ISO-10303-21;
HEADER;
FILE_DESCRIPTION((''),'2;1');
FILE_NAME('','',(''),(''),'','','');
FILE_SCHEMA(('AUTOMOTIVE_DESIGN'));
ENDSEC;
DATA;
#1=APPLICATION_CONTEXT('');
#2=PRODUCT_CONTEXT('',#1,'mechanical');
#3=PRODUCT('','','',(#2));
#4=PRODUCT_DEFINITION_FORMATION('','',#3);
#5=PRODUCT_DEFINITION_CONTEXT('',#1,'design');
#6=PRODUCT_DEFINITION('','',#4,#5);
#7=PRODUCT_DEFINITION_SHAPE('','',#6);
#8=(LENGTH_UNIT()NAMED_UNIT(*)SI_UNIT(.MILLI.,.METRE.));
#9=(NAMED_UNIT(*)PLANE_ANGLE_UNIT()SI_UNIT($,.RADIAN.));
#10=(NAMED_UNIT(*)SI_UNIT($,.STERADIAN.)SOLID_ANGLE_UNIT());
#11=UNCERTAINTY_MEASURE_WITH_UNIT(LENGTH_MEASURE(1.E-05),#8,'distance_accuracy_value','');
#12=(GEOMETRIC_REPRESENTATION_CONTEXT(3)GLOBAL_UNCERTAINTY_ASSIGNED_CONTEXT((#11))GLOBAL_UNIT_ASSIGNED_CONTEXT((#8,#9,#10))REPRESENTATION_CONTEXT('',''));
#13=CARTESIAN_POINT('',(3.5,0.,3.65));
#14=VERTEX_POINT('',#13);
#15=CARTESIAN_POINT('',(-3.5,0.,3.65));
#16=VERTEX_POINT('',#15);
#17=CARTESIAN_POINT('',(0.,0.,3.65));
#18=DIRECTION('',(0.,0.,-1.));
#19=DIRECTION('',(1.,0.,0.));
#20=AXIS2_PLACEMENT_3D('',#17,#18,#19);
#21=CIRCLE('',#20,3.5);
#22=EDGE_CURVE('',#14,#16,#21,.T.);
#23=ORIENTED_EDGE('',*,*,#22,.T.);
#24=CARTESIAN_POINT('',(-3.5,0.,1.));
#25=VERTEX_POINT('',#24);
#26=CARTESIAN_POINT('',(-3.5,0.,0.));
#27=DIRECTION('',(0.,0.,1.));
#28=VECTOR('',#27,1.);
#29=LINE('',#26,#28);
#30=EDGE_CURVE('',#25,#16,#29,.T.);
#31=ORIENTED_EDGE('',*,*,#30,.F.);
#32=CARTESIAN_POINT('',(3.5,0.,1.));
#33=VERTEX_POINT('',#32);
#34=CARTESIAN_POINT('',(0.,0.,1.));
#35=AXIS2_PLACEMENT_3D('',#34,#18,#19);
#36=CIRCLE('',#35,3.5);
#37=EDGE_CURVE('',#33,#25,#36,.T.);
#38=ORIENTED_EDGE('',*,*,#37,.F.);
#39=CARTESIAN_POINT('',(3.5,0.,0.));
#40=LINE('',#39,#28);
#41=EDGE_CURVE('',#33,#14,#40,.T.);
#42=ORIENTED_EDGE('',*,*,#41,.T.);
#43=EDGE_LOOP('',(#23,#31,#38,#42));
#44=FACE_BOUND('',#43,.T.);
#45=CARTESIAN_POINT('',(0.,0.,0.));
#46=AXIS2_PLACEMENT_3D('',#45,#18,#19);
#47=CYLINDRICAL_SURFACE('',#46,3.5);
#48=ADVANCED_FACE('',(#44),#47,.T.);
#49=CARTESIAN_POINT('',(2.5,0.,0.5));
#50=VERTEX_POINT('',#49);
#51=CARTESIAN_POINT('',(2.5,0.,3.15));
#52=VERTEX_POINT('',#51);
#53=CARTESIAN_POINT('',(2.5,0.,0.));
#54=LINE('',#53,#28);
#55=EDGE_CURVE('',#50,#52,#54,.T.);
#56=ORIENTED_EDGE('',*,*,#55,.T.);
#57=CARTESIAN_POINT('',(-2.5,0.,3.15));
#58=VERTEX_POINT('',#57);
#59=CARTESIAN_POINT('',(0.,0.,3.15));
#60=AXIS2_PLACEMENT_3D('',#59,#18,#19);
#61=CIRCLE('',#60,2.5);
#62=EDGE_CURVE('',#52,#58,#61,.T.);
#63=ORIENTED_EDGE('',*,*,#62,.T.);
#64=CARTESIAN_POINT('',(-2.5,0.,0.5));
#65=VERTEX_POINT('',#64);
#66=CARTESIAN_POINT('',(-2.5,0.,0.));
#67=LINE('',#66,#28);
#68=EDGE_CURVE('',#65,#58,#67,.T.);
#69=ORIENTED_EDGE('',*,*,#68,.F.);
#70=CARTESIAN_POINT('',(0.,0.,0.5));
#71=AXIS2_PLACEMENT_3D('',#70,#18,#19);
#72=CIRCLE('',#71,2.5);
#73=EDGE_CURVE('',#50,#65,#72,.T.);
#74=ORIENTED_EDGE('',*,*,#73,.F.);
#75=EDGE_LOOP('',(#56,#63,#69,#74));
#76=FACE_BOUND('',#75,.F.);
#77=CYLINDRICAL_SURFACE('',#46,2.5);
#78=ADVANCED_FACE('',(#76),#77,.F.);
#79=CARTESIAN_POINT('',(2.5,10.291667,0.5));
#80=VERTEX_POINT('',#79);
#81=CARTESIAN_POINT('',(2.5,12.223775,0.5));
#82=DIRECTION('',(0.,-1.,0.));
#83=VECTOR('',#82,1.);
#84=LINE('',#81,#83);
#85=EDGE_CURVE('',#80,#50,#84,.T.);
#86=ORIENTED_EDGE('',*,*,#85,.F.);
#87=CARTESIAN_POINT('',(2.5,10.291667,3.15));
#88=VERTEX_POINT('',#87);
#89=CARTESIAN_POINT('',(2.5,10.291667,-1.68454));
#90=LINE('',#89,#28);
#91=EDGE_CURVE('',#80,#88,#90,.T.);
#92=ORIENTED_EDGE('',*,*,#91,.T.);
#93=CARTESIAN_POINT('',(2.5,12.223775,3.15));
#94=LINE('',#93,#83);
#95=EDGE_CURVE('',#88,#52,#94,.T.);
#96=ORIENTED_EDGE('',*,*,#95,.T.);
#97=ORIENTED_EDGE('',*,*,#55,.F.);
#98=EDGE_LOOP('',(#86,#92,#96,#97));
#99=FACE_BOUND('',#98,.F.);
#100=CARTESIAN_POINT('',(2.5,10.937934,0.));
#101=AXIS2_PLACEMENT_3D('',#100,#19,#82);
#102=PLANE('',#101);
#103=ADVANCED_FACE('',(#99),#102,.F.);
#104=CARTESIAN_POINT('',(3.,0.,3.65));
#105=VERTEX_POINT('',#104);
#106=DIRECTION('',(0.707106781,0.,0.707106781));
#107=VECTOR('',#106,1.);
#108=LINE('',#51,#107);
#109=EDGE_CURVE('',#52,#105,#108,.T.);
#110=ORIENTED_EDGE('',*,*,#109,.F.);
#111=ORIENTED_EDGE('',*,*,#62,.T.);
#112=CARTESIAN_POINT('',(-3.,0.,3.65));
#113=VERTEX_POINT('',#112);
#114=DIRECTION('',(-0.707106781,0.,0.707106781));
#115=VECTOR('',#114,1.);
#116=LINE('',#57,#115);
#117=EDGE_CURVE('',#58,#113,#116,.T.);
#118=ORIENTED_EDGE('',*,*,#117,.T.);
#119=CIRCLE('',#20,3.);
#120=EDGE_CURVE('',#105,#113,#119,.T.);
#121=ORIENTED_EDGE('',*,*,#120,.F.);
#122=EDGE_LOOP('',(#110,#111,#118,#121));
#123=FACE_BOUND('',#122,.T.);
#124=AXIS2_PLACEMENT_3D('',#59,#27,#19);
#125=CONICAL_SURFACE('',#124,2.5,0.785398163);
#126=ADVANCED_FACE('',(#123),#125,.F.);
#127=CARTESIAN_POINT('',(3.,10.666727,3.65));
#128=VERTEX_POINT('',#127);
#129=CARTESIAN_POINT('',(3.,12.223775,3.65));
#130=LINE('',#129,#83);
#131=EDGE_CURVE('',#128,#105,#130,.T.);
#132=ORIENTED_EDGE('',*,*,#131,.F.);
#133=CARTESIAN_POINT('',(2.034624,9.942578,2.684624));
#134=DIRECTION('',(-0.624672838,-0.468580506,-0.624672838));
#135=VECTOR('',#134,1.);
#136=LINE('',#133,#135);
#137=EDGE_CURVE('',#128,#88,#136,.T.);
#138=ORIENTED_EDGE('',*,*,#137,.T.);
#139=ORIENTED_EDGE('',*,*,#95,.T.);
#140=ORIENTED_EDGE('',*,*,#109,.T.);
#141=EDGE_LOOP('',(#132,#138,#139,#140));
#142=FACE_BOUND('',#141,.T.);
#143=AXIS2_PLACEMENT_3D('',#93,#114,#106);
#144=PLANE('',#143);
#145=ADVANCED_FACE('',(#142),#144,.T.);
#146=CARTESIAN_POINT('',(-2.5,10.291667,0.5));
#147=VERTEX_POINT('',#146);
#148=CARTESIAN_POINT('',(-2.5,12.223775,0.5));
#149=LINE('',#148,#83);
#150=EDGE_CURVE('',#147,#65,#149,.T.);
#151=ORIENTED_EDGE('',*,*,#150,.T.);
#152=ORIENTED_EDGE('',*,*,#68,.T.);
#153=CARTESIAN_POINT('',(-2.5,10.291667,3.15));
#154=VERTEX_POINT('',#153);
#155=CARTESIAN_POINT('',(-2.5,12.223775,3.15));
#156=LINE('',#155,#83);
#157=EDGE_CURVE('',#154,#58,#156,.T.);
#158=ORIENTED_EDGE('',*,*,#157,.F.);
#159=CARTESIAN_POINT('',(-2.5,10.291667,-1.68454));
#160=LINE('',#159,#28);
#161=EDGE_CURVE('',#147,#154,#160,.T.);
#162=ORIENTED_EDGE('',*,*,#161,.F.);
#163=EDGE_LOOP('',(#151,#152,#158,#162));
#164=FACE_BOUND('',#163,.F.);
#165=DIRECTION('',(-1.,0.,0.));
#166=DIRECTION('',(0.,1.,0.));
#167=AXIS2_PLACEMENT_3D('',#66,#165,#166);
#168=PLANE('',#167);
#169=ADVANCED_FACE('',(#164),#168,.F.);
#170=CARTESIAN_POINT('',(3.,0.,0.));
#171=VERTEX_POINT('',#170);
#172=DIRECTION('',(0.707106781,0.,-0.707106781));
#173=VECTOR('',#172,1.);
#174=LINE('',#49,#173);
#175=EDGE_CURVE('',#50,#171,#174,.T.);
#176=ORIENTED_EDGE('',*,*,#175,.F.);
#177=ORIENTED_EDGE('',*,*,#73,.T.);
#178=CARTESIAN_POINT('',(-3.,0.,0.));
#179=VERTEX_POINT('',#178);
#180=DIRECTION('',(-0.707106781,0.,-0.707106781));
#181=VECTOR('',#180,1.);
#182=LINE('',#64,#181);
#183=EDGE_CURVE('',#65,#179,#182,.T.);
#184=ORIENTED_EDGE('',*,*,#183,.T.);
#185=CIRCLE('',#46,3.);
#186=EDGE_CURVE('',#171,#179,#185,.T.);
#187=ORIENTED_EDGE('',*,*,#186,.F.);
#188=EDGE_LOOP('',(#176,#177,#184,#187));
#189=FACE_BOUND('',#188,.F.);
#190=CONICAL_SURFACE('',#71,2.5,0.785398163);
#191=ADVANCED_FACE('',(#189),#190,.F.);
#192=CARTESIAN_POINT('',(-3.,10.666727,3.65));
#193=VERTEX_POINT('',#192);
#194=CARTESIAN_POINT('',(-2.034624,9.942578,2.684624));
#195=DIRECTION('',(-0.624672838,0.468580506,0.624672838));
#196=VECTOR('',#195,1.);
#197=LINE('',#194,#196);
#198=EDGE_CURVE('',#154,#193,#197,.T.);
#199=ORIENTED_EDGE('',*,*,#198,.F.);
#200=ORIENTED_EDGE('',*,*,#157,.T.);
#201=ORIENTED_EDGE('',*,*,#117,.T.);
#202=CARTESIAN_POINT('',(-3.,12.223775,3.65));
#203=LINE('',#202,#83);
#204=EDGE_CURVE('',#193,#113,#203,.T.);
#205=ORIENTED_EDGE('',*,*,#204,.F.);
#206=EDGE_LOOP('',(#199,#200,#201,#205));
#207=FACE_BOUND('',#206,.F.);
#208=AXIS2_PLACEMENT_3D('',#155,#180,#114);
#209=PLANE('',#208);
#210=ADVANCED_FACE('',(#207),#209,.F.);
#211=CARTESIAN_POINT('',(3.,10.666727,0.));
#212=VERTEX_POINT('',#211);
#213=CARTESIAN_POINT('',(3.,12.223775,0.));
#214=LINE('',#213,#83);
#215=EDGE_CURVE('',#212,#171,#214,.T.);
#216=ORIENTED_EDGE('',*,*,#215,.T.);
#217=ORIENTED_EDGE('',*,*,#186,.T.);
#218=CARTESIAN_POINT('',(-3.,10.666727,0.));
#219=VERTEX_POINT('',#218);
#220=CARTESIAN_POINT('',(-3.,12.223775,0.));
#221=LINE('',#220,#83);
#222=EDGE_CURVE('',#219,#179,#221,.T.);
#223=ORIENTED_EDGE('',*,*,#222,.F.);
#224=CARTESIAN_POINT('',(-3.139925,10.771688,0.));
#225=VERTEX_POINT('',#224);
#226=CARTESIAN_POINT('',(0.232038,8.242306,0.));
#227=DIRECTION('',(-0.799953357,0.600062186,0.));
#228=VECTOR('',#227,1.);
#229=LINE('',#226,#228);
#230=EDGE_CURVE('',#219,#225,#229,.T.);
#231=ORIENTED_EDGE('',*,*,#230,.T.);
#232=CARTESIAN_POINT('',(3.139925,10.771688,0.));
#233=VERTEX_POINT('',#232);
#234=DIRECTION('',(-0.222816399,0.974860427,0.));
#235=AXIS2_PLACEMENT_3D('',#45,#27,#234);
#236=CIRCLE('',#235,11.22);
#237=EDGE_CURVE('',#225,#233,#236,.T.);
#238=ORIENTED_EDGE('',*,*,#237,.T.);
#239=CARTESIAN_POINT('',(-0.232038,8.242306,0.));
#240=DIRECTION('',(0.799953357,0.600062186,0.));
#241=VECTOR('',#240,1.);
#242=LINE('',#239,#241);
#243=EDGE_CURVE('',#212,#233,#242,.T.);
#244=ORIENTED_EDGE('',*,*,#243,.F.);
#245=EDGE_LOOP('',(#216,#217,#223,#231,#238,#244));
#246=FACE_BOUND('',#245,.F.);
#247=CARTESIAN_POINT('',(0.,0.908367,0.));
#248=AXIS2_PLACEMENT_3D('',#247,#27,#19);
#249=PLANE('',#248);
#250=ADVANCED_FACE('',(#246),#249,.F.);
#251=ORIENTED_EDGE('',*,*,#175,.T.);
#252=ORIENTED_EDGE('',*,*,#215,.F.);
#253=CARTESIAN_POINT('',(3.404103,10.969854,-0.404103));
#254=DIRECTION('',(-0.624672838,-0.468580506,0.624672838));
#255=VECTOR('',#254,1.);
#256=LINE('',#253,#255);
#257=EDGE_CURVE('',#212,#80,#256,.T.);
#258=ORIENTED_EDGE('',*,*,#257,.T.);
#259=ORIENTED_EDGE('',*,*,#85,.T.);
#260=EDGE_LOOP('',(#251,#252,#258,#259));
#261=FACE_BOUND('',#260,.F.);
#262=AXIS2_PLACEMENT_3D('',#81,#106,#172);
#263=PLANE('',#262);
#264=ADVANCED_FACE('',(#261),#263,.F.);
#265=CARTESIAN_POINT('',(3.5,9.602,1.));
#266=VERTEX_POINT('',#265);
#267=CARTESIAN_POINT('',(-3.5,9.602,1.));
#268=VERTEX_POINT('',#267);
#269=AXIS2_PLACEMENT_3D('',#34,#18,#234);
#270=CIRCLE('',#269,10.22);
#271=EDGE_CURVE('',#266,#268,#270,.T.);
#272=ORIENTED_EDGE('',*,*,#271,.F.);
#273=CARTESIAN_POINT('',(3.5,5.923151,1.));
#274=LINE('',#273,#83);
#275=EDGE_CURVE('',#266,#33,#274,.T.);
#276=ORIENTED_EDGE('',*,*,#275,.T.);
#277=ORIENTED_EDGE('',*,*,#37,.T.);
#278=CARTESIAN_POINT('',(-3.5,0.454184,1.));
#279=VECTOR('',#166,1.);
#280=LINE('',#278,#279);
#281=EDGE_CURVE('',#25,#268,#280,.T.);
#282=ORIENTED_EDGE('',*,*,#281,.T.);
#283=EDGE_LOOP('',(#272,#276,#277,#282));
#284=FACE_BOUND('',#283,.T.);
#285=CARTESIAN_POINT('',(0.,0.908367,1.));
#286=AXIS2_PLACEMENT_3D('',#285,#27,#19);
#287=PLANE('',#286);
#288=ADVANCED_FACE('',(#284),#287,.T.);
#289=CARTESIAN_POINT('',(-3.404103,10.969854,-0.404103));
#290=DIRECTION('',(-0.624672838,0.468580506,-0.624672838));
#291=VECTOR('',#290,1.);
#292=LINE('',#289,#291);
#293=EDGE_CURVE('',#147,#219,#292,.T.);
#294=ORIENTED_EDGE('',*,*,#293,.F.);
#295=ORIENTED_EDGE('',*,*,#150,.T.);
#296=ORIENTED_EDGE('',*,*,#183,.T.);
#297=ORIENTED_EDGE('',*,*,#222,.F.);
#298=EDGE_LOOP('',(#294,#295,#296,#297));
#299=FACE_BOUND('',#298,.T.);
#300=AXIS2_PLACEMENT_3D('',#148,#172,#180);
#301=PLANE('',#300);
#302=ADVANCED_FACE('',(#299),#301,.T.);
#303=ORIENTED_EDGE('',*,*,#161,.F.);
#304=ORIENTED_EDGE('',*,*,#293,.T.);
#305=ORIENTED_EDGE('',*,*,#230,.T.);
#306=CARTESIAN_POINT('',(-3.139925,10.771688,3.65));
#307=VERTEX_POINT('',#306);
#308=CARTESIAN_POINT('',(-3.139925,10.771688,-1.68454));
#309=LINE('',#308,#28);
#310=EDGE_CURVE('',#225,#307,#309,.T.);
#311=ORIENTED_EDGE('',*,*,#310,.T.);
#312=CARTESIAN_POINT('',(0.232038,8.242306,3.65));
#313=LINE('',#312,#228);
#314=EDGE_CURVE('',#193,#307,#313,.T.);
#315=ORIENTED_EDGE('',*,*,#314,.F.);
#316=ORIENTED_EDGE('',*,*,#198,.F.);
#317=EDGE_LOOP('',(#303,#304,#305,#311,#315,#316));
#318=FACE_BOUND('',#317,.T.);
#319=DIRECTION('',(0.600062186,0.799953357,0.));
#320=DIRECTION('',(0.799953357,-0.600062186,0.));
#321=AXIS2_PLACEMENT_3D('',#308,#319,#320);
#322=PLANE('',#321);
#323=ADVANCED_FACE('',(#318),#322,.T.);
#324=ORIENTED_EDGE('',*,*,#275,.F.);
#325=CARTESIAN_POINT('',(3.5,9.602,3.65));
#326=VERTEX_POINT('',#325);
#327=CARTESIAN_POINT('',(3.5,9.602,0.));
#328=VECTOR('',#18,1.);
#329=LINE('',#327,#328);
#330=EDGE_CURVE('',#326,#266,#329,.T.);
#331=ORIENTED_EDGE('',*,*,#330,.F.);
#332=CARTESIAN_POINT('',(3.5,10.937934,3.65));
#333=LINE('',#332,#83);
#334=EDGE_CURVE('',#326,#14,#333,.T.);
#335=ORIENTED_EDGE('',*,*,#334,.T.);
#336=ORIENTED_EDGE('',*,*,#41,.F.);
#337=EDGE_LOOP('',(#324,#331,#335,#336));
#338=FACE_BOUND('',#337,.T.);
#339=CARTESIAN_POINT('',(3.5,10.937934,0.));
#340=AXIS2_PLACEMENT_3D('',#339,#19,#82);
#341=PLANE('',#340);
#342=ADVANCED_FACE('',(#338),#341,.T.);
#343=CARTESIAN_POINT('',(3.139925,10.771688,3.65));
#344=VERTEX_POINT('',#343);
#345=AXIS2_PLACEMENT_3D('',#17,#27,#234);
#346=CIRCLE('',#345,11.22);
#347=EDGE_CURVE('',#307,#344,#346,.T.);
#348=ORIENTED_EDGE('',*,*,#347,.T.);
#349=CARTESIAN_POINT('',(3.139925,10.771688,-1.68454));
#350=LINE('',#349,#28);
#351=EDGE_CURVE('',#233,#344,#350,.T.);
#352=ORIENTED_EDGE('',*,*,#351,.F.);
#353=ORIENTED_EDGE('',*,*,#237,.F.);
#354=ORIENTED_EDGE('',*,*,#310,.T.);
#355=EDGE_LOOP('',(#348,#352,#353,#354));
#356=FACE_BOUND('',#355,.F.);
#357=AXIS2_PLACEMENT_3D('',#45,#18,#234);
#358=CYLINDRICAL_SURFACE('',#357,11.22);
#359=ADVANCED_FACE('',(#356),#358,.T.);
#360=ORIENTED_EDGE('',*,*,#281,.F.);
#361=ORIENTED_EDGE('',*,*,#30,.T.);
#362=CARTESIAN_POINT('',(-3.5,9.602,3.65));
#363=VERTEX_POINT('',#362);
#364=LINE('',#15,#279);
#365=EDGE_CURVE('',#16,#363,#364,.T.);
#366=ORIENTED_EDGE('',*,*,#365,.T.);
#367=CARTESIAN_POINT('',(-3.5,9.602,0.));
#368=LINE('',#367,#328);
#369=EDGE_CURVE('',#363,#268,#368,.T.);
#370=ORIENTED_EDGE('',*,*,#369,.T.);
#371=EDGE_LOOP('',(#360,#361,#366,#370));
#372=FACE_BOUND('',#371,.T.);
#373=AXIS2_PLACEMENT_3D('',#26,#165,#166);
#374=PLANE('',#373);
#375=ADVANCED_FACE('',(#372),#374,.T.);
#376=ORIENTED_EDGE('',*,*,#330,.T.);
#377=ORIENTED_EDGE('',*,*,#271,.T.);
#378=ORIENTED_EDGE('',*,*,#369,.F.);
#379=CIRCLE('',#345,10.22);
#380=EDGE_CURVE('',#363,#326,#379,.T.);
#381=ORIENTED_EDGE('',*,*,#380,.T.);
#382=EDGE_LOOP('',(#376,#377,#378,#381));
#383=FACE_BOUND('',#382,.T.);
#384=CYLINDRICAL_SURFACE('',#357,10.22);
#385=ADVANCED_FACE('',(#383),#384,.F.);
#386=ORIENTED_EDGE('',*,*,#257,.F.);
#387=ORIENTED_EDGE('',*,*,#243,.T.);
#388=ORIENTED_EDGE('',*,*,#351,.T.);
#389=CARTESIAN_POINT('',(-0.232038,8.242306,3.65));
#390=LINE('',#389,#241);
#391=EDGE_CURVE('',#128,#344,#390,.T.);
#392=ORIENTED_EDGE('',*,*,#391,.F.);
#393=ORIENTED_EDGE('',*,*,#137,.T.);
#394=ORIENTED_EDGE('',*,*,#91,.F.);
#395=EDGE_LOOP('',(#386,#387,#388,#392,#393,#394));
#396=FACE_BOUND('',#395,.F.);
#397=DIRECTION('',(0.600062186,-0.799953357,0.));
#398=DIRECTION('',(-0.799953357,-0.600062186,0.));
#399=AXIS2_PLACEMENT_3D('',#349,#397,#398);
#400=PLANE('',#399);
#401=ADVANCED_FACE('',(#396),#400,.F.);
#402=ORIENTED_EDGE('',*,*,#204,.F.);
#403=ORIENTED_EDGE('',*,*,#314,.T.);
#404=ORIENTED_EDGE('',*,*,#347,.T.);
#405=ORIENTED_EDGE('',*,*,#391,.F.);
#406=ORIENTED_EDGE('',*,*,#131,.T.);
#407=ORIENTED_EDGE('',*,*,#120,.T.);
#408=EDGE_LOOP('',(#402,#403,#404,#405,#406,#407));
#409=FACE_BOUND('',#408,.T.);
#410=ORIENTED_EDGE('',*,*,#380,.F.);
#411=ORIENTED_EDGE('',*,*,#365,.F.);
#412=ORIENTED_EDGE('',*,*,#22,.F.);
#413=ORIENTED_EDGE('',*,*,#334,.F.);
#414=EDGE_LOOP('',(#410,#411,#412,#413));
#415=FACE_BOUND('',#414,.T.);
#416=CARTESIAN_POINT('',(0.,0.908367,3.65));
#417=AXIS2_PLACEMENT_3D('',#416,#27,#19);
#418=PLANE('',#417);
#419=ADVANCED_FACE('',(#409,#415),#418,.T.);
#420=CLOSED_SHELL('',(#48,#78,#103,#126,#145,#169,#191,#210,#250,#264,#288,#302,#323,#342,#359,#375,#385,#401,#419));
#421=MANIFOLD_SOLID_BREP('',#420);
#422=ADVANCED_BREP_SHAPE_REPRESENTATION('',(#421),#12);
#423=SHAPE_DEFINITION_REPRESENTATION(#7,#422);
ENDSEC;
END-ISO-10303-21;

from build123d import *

# Parameters (mm, degrees)
F1_DEPTH    = 3.65
F2_T        = -1
F3_T1_DEPTH = 7.0190808226
F3_T3_DEPTH = 12.2237754854
F3_T6_ANGLE = 180
F3_T8_ANGLE = 180


# Not quite as in the source:
# - a fillet or chamfer that OpenCascade refuses, or shapes differently, is made with other operations: its cross-section is extruded or revolved along the edge and cut away or added


with BuildPart() as f1:
    # F0 (on Top) → F1 (new body)
    with BuildSketch(Plane.XY):
        with BuildLine():
            ThreePointArc((-2.5, 10.9379339914), (-6.9942261902, -8.773209219), (11.22, 0))
            ThreePointArc((11.22, 0), (8.773209219, 6.9942261902), (2.5, 10.9379339914))
            Line((2.5, 10.9379339914), (2.5, 0))
            ThreePointArc((2.5, 0), (0, -2.5), (-2.5, 0))
            Line((-2.5, 0), (-2.5, 10.9379339914))
        make_face()
    extrude(amount=F1_DEPTH)

    # F2
    f2_openings = [f1.faces().sort_by_distance(p)[0] for p in [
        (-6.797639, -8.52662, 3.65),
    ]]
    offset(amount=F2_T, openings=f2_openings)

    # F3: chamfer of 0.5 on 8 edges, made by hand

    # F3_s2 → F3_t1 (cut)
    with BuildSketch(Plane.XY.offset(-1.6845404113)):
        with BuildLine():
            Line((-3.1399253731, 10.7716882916), (-2.5, 10.2916665317))
            Line((-2.5, 10.2916665317), (-2.5, 10.9379339914))
            ThreePointArc((-2.5, 10.9379339914), (-2.8272189257, 10.857957135), (-3.1399253731, 10.7716882916))
        make_face()
        with BuildLine():
            Line((3.1399253731, 10.7716882916), (2.5, 10.2916665317))
            Line((2.5, 10.2916665317), (2.5, 10.9379339914))
            ThreePointArc((2.5, 10.9379339914), (2.8272189257, 10.857957135), (3.1399253731, 10.7716882916))
        make_face()
    extrude(amount=F3_T1_DEPTH, mode=Mode.SUBTRACT)

    # F3_s4 → F3_t3 (cut)
    with BuildSketch(Plane.XZ.offset(-12.2237754854)):
        Polygon((2.5, 0.5), (3, 0), (2.5, 0), align=None)
        Polygon((2.5, 3.15), (3, 3.65), (2.5, 3.65), align=None)
        Polygon((-2.5, 0.5), (-3, 0), (-2.5, 0), align=None)
        Polygon((-2.5, 3.15), (-3, 3.65), (-2.5, 3.65), align=None)
    extrude(amount=F3_T3_DEPTH, mode=Mode.SUBTRACT)

    # F3_s5 → F3_t6 (revolve, cut)
    with BuildSketch(Plane.XZ):
        Polygon((2.5, 3.15), (3, 3.65), (2.5, 3.65), align=None)
    revolve(axis=Axis((0, 0, 3.65), (0, 0, -1)), revolution_arc=F3_T6_ANGLE, mode=Mode.SUBTRACT)

    # F3_s7 → F3_t8 (revolve, cut)
    with BuildSketch(Plane.XZ):
        Polygon((2.5, 0.5), (3, 0), (2.5, 0), align=None)
    revolve(axis=Axis((0, 0, 0), (0, 0, -1)), revolution_arc=F3_T8_ANGLE, mode=Mode.SUBTRACT)


solid = f1.part
